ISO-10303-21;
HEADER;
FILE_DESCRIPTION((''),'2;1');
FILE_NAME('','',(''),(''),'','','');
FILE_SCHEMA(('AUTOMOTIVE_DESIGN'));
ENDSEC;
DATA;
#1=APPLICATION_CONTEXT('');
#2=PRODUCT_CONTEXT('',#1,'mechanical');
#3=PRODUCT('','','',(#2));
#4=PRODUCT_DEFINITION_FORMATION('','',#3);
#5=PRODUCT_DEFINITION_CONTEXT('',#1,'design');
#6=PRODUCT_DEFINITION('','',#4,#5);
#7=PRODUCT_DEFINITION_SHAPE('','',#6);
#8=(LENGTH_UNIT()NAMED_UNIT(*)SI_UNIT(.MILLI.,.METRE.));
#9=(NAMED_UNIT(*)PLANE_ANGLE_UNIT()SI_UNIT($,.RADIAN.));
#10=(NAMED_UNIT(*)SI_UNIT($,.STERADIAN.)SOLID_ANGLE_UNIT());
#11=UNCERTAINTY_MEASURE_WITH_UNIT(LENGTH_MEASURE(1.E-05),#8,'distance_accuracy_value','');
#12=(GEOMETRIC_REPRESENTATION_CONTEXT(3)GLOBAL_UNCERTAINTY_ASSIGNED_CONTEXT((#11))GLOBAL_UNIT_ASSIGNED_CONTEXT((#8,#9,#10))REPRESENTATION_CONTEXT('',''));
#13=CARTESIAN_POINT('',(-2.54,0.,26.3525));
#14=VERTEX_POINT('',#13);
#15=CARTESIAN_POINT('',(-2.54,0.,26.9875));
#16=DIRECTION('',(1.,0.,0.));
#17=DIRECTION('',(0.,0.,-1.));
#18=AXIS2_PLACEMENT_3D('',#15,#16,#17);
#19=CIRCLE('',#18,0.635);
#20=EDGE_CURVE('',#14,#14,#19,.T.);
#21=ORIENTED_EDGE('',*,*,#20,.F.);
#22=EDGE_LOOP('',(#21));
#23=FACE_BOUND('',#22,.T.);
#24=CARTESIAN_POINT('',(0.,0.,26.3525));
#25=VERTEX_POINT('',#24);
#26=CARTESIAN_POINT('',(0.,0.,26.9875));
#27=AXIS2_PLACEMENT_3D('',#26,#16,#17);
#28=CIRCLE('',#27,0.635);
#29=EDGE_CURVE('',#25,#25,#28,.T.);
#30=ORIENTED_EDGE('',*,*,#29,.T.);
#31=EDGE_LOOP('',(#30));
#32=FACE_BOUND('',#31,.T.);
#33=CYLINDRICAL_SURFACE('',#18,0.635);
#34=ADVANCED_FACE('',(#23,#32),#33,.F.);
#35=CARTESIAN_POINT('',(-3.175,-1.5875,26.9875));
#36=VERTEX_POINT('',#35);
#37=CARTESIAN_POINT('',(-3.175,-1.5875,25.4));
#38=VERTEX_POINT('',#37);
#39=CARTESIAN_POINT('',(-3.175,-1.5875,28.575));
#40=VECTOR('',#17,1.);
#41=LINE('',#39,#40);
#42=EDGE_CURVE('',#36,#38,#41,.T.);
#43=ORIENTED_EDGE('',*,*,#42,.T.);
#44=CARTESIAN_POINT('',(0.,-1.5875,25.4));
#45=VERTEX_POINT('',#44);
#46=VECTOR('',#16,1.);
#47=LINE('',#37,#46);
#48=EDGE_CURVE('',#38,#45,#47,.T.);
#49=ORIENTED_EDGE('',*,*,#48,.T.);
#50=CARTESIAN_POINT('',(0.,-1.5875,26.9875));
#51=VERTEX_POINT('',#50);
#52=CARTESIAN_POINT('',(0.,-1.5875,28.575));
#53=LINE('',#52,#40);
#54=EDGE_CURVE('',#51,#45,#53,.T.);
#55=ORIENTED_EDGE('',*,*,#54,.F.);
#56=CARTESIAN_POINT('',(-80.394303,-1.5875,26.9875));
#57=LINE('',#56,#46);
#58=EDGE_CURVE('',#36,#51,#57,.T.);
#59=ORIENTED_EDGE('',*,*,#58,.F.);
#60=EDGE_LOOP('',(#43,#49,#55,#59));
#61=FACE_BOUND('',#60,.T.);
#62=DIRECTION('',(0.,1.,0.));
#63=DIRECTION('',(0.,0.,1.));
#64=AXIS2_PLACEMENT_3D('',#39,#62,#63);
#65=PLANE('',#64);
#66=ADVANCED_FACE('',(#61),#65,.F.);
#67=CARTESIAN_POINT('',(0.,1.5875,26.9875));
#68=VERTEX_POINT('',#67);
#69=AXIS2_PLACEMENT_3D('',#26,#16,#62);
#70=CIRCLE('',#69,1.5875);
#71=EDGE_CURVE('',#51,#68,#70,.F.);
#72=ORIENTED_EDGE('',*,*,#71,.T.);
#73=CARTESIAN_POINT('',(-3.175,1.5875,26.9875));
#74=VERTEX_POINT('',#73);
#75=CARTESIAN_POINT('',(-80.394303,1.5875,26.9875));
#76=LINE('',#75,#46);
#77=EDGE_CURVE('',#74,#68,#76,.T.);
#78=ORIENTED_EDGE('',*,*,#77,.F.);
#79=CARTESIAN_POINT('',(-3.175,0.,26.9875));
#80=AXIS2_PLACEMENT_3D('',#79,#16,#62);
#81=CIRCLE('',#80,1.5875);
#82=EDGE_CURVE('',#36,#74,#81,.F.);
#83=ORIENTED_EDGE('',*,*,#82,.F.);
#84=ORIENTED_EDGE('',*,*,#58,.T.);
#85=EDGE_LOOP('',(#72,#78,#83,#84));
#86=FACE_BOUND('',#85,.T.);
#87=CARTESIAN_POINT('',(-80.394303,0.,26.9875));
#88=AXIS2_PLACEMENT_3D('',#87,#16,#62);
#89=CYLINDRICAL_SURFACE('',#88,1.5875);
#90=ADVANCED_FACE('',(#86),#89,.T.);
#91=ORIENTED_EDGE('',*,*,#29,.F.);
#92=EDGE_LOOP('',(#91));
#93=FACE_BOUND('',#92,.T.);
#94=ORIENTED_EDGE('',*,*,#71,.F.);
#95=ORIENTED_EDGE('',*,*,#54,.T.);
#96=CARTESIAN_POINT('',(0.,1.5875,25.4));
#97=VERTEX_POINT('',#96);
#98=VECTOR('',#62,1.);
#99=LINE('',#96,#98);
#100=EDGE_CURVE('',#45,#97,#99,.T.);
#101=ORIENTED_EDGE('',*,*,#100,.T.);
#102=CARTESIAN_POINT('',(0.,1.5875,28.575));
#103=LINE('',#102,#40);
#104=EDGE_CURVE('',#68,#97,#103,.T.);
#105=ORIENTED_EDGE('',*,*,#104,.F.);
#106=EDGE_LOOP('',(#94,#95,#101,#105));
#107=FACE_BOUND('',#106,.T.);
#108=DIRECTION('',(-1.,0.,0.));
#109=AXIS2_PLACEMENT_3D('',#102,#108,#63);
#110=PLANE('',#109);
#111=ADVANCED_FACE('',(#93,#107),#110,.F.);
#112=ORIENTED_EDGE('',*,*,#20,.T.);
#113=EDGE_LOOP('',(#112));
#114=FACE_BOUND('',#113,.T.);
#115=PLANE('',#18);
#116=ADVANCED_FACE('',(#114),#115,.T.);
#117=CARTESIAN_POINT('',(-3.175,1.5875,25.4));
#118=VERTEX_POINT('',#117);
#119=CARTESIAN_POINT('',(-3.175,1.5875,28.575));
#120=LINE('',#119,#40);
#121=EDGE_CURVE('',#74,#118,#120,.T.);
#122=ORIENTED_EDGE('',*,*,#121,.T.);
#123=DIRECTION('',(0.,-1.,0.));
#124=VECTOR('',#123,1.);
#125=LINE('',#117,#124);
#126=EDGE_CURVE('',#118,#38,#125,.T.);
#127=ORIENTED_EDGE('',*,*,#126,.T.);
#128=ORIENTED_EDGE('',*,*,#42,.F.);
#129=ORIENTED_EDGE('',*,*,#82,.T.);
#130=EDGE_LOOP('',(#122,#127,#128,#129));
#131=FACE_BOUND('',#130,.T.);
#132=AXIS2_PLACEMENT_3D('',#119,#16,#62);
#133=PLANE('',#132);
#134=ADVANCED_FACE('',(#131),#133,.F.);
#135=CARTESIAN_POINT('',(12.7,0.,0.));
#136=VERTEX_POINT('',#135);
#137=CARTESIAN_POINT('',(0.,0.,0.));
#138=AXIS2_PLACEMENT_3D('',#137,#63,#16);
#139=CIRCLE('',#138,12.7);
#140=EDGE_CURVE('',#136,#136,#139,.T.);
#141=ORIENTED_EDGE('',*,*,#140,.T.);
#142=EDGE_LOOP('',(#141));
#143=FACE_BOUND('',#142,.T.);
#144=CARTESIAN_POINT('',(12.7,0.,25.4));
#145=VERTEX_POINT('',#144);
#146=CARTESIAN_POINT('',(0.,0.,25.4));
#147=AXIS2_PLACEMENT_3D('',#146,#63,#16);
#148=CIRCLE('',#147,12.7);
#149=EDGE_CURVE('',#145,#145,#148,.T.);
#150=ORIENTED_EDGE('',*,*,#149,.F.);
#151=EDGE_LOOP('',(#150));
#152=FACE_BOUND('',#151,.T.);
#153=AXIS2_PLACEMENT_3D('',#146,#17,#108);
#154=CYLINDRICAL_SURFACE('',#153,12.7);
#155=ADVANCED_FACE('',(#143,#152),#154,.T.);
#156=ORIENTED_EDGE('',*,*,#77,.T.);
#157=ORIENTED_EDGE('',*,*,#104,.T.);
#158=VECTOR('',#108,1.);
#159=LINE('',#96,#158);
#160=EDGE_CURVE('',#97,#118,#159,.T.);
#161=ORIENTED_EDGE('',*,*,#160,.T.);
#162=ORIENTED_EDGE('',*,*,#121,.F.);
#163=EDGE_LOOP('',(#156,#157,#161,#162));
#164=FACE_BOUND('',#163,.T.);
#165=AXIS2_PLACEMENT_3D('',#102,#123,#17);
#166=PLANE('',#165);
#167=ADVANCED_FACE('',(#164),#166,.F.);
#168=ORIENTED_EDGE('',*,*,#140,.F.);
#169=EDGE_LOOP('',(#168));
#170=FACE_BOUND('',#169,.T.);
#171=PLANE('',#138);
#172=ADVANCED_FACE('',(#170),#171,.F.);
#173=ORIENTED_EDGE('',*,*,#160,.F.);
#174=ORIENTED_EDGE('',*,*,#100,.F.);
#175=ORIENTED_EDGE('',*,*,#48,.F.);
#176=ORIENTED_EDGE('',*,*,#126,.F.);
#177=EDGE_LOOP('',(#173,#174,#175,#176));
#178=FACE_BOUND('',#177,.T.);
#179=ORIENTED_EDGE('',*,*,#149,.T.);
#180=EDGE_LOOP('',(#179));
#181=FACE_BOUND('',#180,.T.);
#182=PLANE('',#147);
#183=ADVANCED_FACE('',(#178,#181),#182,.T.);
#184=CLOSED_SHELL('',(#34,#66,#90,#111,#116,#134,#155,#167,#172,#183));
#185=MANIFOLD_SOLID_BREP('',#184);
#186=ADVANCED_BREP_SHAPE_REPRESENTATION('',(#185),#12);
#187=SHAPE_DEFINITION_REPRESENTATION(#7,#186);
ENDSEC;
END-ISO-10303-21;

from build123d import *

# Parameters (mm, degrees)
SKETCH2_R           = 12.7
BOSS_EXTRUDE1_DEPTH = 25.4
SKETCH3_W           = 3.175
SKETCH3_H           = 3.175
BOSS_EXTRUDE2_DEPTH = 3.175
CUT_EXTRUDE1_START  = -3.175
CUT_EXTRUDE1_DEPTH  = 3.175
SKETCH6_R           = 0.635
CUT_EXTRUDE2_DEPTH  = 2.54


# Read off the part's stored shape, not the designer's step: Cut-Extrude1
with BuildPart() as part:
    # Sketch2 → Boss-Extrude1 (new body)
    with BuildSketch(Plane.XY):
        Circle(SKETCH2_R)
    extrude(amount=BOSS_EXTRUDE1_DEPTH)

    # Sketch3 → Boss-Extrude2 (add)
    with BuildSketch(Plane.XY.offset(25.4)):
        with Locations((-1.5875, 0)):
            Rectangle(SKETCH3_W, SKETCH3_H)
    extrude(amount=BOSS_EXTRUDE2_DEPTH)

    # Cut-Extrude1 outline → Cut-Extrude1 (cut)
    with BuildSketch(Plane.ZY.offset(3.175).offset(CUT_EXTRUDE1_START)):
        with BuildLine():
            Line((28.575, 1.5875), (26.9875, 1.5875))
            ThreePointArc((26.9875, 1.5875), (28.110032015, 1.122532015), (28.575, 0))
            Line((28.575, 0), (28.575, 1.5875))
        make_face()
        with BuildLine():
            Line((28.575, -1.5875), (28.575, 0))
            ThreePointArc((28.575, 0), (28.110032015, -1.122532015), (26.9875, -1.5875))
            Line((26.9875, -1.5875), (28.575, -1.5875))
        make_face()
    extrude(amount=CUT_EXTRUDE1_DEPTH, mode=Mode.SUBTRACT)

    # Sketch6 → Cut-Extrude2 (cut)
    with BuildSketch(Plane(origin=(0, 0, 0), x_dir=(0, 0, -1), z_dir=(1, 0, 0))):
        with Locations((-26.9875, 0)):
            Circle(SKETCH6_R)
    extrude(amount=-CUT_EXTRUDE2_DEPTH, mode=Mode.SUBTRACT)


solid = part.part
